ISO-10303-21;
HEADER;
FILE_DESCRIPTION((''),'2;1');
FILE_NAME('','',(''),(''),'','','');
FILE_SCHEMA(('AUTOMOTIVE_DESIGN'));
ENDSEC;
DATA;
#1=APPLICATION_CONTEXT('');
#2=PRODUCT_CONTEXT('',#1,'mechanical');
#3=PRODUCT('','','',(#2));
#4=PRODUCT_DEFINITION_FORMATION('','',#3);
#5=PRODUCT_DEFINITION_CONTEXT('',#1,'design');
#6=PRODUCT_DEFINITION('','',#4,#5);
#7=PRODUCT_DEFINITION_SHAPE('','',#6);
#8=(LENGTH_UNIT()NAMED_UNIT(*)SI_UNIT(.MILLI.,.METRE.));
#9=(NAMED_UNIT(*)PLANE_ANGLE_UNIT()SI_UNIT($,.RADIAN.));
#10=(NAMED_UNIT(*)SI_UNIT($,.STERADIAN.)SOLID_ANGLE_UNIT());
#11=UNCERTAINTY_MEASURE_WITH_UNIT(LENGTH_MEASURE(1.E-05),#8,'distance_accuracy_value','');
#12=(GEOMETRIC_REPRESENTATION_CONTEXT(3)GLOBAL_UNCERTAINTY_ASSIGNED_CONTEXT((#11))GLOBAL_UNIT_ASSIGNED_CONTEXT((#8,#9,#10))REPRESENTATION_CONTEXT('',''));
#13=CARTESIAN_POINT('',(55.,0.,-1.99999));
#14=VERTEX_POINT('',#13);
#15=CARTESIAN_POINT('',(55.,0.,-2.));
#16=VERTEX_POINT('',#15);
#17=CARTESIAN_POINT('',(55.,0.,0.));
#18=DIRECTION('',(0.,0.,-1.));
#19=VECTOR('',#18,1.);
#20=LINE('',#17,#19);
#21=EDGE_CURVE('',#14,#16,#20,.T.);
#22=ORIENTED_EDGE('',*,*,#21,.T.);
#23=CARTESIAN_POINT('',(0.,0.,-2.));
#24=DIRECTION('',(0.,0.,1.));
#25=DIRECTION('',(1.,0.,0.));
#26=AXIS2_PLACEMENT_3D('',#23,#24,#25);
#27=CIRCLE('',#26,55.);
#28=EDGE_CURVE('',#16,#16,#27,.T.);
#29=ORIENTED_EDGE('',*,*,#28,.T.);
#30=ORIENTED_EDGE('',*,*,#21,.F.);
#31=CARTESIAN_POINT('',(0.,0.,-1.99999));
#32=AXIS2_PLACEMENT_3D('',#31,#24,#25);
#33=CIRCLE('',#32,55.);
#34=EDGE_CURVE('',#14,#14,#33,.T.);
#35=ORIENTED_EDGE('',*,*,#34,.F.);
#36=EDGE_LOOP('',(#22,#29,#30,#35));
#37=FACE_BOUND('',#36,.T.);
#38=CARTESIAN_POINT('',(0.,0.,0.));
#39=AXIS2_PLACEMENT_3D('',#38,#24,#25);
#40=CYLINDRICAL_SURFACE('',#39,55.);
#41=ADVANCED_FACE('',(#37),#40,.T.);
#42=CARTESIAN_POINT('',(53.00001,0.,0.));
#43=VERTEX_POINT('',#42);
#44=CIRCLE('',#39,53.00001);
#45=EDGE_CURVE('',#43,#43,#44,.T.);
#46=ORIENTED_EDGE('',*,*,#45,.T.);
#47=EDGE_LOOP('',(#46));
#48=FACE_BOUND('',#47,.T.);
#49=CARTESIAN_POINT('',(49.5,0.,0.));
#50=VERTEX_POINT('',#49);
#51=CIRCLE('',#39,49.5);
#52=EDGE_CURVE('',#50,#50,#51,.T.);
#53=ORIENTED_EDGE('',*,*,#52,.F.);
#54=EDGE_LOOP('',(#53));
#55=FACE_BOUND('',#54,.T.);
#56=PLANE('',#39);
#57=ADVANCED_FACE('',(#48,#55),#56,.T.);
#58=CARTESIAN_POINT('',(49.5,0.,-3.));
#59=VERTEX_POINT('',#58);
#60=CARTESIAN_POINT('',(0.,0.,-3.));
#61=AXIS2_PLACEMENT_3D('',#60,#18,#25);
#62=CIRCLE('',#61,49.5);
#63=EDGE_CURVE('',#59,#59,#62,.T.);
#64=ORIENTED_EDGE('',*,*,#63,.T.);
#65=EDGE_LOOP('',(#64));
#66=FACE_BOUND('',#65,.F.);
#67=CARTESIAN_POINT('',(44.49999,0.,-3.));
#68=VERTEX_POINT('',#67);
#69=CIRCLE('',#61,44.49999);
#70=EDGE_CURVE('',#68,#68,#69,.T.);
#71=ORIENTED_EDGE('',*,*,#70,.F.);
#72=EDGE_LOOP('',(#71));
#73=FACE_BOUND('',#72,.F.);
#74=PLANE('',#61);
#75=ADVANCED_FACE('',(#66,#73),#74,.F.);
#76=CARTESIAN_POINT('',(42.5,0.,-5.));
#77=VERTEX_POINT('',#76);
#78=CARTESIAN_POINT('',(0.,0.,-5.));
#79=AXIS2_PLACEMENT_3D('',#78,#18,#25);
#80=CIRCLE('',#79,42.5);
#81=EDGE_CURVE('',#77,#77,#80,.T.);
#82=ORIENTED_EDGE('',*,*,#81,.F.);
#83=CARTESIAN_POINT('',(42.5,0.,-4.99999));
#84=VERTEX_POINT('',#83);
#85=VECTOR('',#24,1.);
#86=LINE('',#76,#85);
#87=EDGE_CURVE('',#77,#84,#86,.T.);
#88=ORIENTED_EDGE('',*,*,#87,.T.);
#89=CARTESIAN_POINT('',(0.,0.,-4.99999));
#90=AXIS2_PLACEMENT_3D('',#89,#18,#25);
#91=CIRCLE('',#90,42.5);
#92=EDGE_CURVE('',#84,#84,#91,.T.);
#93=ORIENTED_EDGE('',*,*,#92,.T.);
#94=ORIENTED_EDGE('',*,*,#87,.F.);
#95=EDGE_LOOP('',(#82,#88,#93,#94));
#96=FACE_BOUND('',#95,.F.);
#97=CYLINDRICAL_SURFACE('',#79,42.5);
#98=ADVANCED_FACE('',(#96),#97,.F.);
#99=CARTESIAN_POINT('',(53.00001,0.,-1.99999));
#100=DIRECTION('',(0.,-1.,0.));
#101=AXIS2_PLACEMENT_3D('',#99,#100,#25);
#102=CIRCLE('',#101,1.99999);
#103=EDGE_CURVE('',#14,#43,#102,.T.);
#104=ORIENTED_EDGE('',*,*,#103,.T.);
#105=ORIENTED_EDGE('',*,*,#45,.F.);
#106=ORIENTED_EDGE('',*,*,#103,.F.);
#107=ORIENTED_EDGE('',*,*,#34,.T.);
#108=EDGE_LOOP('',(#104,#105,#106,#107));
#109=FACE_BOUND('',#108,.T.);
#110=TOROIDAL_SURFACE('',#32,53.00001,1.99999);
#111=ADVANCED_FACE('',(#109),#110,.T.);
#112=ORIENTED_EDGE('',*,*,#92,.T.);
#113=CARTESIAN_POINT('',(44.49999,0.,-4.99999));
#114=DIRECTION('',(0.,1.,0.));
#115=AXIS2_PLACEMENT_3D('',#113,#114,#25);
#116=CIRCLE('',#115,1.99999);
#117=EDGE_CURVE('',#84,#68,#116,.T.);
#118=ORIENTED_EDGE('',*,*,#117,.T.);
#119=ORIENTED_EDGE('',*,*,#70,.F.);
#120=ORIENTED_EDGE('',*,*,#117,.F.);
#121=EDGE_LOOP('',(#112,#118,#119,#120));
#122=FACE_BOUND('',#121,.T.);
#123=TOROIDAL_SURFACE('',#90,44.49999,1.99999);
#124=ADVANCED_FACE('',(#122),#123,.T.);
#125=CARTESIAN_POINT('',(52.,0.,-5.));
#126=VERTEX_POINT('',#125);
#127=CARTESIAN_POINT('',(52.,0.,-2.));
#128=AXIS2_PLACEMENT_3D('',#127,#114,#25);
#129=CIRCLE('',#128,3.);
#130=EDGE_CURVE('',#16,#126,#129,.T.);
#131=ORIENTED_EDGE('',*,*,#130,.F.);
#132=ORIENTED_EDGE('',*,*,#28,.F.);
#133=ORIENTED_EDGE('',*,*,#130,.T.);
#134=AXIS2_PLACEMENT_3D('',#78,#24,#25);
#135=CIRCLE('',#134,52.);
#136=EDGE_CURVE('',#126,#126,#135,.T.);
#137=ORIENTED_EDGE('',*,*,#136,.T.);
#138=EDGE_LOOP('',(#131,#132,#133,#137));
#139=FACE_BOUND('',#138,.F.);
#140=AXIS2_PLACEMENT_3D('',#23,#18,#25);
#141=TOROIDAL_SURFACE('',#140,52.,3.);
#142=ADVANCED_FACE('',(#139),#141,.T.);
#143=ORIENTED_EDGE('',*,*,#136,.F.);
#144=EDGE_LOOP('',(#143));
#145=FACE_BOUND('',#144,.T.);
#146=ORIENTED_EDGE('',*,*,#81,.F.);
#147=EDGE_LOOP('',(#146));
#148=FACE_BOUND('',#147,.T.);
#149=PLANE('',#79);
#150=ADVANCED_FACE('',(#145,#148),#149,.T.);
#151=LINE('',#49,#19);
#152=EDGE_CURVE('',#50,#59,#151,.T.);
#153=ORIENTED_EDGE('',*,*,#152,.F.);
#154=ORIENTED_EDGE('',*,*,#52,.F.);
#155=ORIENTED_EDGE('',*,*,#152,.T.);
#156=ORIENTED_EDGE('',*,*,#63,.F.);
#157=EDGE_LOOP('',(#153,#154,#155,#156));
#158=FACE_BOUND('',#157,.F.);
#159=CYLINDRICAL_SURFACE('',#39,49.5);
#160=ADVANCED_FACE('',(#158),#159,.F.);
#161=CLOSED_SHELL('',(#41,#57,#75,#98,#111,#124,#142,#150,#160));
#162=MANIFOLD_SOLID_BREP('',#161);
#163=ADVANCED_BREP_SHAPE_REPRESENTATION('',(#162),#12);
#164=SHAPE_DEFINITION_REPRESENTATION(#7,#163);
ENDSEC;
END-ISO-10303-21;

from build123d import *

# Parameters (mm, degrees)
F0_R     = 55
F1_DEPTH = 5
F2_R     = 3
F3_R     = 1.99999
F4_R     = 49.5
F5_DEPTH = 5
F6_R     = 49.5
F6_R_2   = 42.5
F7_DEPTH = 2
F8_R     = 1.99999


# Not quite as in the source:
# - a fillet or chamfer is up to 0.001 mm smaller than in the source, because OpenCascade refuses the exact size


with BuildPart() as f1:
    # F0 (on Top) → F1 (new body)
    with BuildSketch(Plane.XY):
        Circle(F0_R)
    extrude(amount=-F1_DEPTH)

    # F2
    f2_edges = [f1.edges().sort_by_distance(p)[0] for p in [
        (-55, 0, -5),
    ]]
    fillet(f2_edges, radius=F2_R)

    # F3 (radius 2 in the source; OpenCascade refuses exactly that, so slightly less here)
    f3_edges = [f1.edges().sort_by_distance(p)[0] for p in [
        (-55, 0, 0),
    ]]
    fillet(f3_edges, radius=F3_R)

    # F4 (on Top) → F5 (cut)
    with BuildSketch(Plane.XY):
        Circle(F4_R)
    extrude(amount=-F5_DEPTH, mode=Mode.SUBTRACT)

    # F6 (on face) → F7 (join)
    with BuildSketch(Plane(origin=(0, 0, -5), x_dir=(1, 0, 0), z_dir=(0, 0, -1))):
        Circle(F6_R)
        Circle(F6_R_2, mode=Mode.SUBTRACT)
    extrude(amount=-F7_DEPTH)

    # F8 (radius 2 in the source; OpenCascade refuses exactly that, so slightly less here)
    f8_edges = [f1.edges().sort_by_distance(p)[0] for p in [
        (-42.5, 0, -3),
    ]]
    fillet(f8_edges, radius=F8_R)


solid = f1.part
